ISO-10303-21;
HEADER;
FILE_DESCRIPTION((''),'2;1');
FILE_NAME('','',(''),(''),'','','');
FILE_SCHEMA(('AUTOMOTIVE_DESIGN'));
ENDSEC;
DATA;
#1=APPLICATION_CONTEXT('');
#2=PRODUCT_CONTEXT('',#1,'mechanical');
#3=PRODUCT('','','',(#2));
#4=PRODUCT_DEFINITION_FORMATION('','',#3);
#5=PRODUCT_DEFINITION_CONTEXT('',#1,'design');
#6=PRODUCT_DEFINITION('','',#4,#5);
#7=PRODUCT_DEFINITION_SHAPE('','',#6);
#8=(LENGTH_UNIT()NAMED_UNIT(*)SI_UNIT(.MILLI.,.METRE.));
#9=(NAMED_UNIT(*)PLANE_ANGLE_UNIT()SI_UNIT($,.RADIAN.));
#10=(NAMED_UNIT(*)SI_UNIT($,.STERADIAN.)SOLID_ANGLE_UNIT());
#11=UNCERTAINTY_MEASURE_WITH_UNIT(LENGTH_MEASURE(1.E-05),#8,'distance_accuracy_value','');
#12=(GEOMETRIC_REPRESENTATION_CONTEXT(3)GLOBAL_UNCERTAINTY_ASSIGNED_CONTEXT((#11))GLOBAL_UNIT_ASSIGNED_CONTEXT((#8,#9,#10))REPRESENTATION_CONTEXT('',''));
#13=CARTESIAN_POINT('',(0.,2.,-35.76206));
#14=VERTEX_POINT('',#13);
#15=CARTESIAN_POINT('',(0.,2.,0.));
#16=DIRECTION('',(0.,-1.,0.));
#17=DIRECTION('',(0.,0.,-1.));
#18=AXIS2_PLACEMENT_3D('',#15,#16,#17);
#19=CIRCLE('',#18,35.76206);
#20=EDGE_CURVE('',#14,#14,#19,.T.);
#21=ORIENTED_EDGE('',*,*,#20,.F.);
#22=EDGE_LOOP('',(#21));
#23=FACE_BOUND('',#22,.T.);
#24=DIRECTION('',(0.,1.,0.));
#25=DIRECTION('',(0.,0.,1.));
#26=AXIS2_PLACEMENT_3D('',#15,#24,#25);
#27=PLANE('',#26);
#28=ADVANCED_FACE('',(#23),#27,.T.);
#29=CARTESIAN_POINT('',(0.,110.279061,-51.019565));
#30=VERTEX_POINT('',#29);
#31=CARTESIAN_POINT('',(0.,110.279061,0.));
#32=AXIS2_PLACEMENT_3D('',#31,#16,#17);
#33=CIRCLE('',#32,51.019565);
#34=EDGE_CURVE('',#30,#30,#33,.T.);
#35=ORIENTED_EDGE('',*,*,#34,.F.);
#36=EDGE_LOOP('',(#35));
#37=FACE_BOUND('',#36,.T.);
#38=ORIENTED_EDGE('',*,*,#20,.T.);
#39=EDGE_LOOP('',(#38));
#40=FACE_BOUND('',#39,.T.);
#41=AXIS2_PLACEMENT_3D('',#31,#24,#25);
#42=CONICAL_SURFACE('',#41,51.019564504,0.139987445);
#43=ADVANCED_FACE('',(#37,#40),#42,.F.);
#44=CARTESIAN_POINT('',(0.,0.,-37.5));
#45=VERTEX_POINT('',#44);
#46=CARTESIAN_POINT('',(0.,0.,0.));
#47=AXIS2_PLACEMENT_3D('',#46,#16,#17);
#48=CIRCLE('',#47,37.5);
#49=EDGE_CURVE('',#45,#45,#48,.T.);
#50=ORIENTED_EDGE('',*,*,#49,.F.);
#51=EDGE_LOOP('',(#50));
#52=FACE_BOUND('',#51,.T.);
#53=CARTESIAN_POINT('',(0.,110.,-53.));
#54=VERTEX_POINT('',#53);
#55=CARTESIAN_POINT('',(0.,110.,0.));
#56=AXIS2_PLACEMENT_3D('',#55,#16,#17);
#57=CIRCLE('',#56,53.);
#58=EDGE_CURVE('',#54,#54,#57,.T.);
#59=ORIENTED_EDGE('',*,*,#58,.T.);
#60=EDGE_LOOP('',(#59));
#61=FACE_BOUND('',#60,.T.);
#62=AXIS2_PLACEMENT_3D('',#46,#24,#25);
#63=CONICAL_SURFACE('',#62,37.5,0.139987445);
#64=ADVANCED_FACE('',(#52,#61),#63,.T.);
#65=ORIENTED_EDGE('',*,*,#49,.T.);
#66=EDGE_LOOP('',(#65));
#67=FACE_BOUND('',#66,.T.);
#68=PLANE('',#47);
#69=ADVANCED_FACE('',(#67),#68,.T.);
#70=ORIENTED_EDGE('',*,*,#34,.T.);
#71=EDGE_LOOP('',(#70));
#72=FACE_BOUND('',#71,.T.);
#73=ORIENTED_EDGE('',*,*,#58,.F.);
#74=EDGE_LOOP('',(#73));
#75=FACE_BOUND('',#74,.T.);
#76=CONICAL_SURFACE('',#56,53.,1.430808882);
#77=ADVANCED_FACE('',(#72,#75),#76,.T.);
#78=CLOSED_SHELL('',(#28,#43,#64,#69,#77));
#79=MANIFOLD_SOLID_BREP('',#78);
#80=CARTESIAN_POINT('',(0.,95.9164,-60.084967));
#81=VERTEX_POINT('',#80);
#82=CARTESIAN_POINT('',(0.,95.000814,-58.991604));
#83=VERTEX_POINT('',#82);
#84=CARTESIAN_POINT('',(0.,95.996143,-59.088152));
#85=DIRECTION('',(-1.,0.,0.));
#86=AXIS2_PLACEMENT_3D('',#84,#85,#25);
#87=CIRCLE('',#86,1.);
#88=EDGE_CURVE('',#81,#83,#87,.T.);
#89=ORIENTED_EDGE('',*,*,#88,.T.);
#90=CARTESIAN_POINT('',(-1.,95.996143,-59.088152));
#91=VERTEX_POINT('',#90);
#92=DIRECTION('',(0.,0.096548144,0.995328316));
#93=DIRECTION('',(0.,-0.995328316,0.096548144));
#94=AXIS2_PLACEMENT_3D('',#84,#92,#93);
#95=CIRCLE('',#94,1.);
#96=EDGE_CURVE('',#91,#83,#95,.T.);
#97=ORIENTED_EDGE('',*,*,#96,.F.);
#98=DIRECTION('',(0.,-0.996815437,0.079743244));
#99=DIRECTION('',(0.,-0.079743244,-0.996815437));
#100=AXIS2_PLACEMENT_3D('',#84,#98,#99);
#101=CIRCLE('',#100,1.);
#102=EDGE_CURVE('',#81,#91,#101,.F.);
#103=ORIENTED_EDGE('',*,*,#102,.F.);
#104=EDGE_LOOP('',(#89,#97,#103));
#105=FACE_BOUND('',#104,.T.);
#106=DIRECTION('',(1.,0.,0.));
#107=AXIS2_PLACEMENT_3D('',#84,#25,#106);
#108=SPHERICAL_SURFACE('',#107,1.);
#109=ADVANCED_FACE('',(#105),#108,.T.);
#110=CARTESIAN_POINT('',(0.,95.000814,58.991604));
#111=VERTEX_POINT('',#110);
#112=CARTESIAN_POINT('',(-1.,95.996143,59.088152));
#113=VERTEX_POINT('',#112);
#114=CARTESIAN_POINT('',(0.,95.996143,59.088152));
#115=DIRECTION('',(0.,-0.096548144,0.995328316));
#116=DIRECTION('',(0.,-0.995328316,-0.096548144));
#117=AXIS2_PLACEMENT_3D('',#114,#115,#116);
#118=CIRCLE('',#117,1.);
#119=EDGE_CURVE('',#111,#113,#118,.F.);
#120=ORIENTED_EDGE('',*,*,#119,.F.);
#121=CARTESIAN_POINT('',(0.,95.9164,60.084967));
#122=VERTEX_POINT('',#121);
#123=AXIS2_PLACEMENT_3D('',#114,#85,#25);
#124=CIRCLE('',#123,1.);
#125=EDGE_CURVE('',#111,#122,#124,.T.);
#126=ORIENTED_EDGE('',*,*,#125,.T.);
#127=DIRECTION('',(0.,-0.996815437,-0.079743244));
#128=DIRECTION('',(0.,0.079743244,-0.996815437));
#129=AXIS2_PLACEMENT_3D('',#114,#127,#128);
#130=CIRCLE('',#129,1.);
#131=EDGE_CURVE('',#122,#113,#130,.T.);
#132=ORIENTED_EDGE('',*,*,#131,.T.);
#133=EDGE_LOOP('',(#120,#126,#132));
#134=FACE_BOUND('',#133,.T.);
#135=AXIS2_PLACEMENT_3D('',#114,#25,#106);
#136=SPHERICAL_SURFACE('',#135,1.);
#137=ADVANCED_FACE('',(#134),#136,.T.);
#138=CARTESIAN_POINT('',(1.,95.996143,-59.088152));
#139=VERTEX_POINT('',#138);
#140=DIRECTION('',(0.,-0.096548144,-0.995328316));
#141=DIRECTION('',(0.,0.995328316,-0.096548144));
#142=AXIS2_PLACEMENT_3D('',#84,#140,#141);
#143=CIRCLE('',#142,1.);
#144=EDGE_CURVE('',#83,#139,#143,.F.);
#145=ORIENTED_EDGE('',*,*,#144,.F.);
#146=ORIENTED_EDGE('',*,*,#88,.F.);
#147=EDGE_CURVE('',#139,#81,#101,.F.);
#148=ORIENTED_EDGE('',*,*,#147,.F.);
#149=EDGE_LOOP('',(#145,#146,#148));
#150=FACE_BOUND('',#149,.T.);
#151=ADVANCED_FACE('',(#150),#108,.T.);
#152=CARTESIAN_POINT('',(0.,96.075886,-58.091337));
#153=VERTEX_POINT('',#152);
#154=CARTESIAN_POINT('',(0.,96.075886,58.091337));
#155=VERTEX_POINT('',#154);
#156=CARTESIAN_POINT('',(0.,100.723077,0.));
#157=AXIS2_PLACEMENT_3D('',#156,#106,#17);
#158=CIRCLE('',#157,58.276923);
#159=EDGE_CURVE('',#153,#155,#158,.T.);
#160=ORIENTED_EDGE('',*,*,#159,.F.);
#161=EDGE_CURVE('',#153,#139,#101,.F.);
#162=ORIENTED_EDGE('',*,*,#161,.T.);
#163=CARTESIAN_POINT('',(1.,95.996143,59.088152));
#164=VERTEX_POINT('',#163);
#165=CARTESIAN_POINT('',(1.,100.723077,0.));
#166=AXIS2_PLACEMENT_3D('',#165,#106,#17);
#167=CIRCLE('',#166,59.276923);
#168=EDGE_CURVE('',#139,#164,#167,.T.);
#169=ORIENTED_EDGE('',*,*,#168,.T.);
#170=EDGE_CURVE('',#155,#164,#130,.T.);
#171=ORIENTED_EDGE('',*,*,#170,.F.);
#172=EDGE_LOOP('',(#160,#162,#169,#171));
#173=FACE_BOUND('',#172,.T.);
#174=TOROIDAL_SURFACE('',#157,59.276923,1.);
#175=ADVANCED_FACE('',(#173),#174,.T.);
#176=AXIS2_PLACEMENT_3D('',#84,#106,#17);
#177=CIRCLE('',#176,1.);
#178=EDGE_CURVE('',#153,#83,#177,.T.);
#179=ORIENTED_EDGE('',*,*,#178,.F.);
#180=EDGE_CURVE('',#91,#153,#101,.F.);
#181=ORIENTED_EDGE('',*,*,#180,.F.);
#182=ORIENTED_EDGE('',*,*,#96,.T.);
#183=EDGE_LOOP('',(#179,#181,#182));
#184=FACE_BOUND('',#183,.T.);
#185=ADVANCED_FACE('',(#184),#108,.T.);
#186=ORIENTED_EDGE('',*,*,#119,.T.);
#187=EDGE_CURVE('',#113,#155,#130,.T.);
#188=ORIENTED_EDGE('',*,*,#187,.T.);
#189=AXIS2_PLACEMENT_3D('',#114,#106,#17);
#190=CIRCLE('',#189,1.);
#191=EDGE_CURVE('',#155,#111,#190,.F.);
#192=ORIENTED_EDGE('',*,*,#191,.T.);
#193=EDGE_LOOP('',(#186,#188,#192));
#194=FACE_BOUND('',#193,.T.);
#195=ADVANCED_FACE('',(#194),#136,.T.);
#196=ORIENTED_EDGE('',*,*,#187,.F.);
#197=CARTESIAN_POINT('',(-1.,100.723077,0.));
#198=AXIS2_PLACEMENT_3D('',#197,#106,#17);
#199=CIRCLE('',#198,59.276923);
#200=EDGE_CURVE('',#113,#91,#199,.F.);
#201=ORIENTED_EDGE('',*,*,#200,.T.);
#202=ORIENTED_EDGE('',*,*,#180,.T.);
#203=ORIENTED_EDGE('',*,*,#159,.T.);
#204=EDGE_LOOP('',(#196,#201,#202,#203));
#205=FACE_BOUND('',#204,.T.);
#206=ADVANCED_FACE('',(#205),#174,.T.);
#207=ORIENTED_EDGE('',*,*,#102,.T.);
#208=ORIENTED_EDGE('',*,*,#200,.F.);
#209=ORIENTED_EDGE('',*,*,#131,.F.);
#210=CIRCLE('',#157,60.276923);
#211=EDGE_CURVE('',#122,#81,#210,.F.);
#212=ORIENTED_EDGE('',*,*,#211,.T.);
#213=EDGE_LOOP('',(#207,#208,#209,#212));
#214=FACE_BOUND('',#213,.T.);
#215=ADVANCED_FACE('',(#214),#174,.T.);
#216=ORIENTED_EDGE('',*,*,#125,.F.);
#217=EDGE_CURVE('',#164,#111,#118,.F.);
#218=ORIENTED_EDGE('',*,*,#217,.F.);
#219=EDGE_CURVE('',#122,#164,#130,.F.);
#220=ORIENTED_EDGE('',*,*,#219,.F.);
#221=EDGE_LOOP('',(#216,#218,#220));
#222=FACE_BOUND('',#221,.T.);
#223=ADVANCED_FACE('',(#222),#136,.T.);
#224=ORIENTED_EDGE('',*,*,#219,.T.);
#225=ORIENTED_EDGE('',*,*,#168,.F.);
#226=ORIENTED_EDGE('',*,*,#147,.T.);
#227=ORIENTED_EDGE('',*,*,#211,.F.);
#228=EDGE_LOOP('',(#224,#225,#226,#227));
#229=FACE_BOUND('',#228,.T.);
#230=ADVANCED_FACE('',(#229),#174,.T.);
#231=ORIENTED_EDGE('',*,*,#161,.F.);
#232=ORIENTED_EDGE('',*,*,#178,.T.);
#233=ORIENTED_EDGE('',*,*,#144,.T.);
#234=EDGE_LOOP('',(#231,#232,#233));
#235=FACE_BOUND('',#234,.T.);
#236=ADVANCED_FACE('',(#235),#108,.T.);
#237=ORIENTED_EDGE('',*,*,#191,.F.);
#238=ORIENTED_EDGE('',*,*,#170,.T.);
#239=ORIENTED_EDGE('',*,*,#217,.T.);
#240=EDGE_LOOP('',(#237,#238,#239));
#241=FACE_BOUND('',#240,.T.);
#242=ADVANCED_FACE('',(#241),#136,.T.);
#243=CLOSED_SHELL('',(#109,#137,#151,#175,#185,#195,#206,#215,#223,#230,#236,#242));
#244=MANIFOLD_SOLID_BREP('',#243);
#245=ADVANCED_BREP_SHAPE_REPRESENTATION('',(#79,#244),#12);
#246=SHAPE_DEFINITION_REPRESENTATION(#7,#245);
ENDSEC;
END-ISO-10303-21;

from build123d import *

# Parameters (mm, degrees)
EXTRUDE_THIN1_DEPTH = 1
FILLET1_R           = 1


with BuildPart() as part:
    # Sketch1 → Revolve1 (revolve)
    with BuildSketch(Plane.XY, mode=Mode.PRIVATE) as revolve1_sk:
        Polygon((0, 0), (37.5, 0), (53, 110), (51.019564504, 110.279061365), (35.762060402, 2), (0, 2), align=None)
    revolve(revolve1_sk.sketch.rotate(Axis((0, 0, 0), (0, 1, 0)), 90), axis=Axis((0, 0, 0), (0, 1, 0)))


with BuildPart() as body_2:
    # Sketch2 → Extrude-Thin1 (new, symmetric)
    with BuildSketch(Plane(origin=(0, 0, 0), x_dir=(0, 0, -1), z_dir=(1, 0, 0))):
        with BuildLine():
            ThreePointArc((-58.004671684, 95.096548144), (0, 159), (58.004671684, 95.096548144))
            Line((58.004671684, 95.096548144), (59.995328316, 94.903451856))
            ThreePointArc((59.995328316, 94.903451856), (0, 161), (-59.995328316, 94.903451856))
            Line((-59.995328316, 94.903451856), (-58.004671684, 95.096548144))
        make_face()
    extrude(amount=EXTRUDE_THIN1_DEPTH, both=True)

    # Fillet1
    fillet1_edges = [body_2.edges().sort_by_distance(p)[0] for p in [
        (1, 161, 0),
        (1, 95, 59),
        (-1, 95, 59),
        (1, 159, 0),
        (-1, 161, 0),
        (-1, 95, -59),
        (-1, 159, 0),
        (0, 95.096548144, 58.004671684),
        (0, 94.903451856, 59.995328316),
        (0, 94.903451856, -59.995328316),
        (0, 95.096548144, -58.004671684),
        (1, 95, -59),
    ]]
    fillet(fillet1_edges, radius=FILLET1_R - 0.0001)  # a hair under: the kernel refuses the full size


solid = Compound([part.part, body_2.part])
